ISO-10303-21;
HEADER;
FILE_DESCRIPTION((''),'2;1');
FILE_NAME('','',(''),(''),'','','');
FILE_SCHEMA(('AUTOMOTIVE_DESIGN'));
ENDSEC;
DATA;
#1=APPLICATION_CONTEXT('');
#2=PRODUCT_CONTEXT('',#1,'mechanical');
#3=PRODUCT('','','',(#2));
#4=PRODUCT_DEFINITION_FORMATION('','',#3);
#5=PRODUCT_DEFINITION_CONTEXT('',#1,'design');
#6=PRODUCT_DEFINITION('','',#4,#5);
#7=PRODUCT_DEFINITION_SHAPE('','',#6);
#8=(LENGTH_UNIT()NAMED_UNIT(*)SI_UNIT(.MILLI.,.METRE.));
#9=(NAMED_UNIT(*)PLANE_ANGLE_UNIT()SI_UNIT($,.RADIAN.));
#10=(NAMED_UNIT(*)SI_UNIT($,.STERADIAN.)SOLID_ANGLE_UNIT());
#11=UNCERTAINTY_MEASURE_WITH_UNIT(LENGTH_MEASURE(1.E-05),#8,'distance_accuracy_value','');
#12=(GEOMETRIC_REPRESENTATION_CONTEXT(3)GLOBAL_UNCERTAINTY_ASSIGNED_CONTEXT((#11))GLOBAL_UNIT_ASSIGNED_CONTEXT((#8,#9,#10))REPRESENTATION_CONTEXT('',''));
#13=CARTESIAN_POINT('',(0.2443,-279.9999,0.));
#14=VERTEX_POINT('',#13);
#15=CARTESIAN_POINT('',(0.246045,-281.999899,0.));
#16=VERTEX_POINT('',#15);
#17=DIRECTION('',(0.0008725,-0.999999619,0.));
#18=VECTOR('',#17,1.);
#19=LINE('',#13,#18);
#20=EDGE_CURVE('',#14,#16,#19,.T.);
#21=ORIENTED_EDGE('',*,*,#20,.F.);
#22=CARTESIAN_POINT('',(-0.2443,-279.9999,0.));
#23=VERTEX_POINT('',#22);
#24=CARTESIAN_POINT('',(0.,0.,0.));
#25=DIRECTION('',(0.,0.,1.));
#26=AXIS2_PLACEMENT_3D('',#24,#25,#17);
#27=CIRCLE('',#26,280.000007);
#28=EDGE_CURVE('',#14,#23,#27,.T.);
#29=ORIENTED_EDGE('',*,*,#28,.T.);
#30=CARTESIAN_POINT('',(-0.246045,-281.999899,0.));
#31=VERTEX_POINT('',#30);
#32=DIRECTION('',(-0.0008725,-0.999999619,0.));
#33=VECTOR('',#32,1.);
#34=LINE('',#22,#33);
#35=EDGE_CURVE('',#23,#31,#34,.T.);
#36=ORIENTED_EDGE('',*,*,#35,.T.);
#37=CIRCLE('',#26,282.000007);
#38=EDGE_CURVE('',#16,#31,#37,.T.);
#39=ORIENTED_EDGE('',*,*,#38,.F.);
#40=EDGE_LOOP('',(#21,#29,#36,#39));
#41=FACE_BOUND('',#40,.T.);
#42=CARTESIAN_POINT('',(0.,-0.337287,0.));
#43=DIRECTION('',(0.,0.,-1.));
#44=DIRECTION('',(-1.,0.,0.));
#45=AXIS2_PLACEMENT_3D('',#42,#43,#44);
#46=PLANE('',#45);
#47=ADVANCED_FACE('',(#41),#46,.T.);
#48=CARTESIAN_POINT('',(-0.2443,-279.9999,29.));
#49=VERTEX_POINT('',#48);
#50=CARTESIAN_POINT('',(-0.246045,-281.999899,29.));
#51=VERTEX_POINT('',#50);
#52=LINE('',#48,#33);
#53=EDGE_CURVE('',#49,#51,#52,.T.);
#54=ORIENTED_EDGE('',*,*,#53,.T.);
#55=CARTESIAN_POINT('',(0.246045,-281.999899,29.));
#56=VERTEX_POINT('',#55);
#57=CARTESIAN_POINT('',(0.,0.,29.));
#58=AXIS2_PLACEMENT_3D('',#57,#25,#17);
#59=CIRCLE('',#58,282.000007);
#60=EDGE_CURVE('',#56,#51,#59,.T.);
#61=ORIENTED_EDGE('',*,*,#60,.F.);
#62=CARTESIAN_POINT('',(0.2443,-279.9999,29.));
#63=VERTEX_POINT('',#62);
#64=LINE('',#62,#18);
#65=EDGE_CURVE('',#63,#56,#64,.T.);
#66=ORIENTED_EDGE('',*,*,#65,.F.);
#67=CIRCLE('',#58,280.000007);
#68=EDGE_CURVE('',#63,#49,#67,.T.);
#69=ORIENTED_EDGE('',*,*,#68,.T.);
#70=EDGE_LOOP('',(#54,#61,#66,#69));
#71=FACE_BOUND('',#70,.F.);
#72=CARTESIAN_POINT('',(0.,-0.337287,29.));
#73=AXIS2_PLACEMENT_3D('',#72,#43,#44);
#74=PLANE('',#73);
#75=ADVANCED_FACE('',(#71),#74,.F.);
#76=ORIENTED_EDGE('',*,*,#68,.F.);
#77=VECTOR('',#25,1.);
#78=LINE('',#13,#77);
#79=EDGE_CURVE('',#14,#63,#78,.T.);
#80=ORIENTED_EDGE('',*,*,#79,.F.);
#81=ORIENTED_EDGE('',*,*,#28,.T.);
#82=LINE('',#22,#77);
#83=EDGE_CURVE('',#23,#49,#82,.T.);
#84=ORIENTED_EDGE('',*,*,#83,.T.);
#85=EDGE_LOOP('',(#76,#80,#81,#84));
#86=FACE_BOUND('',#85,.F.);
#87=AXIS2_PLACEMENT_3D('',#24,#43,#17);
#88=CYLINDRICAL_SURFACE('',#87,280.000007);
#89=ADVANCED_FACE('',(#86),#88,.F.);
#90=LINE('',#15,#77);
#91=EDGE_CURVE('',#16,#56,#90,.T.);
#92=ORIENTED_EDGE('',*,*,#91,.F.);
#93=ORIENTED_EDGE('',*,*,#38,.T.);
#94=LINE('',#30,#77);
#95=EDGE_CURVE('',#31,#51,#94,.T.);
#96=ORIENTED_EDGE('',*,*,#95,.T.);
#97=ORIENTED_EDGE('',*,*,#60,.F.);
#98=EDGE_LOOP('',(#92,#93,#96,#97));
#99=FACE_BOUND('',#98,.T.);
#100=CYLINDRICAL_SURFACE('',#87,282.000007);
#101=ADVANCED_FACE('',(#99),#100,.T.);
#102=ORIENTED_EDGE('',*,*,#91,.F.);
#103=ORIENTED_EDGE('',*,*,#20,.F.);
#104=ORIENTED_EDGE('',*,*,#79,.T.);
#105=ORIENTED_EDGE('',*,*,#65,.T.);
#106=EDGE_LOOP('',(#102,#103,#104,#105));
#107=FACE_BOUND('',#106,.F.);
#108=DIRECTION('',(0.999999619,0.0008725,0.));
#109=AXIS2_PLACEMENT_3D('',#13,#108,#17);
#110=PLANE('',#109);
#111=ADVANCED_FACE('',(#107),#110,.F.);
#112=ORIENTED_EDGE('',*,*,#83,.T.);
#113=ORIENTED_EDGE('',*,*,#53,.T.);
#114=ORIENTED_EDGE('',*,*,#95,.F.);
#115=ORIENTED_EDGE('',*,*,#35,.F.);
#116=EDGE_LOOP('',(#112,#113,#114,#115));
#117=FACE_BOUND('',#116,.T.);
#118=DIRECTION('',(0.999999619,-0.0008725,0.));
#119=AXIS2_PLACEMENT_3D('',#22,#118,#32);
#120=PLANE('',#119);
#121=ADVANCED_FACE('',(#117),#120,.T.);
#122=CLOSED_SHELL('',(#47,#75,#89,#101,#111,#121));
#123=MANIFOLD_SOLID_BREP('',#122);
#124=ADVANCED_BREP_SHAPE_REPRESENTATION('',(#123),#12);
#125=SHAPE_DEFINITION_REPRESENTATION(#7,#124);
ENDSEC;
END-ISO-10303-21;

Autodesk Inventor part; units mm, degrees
ref_plane "YZ Plane" through (0, 0, 0) normal (1, 0, 0) x (0, 1, 0)
ref_plane "XZ Plane" through (0, 0, 0) normal (0, 1, 0) x (-1, 0, 0)
ref_plane "XY Plane" through (0, 0, 0) normal (0, 0, 1) x (1, 0, 0)
sketch "Sketch1" plane through (0, 0, 0) normal (0, 0, 1) x (1, 0, 0)
  arc A0 (0.2443, -279.9999) -> (-0.2443, -279.9999) centre (0, 0) ccw
  line L0 (0, 0) -> (-0.2443, -279.9999) construction
  line L1 (0, 0) -> (0, 241.44) construction
  line L2 (0, 0) -> (0.2443, -279.9999) construction
  arc A1 (-0.2443, -279.9999) -> (0.2443, -279.9999) centre (0, 0) ccw construction
  point P0 (-207.8461, 120)
  point P1 (207.8461, 120)
  dimension "d28" = 560
  dimension "d30" = 359.9
contour flange "Contour Flange1" sketch "Sketch1" thickness 2 bend radius 2 width 29 along (0, 0, 1) mid plane no both sides no wall seen from (0, 280, 0) lies toward (0, 1, 0) curves A0
bend "Bend1"
corner "Corner1"
equation "\"d28\" = Колесо_диам3_борт_ступицы"
equation "\"d31\" = Thickness"
equation "\"d32\" = BendReliefWidth"
equation "\"d33\" = BendReliefDepth"
equation "\"d34\" = MinimumRemnant"
equation "\"d35\" = TransitionRadius"
equation "\"d37\" = BendRadius"
equation "\"d39\" = CornerReliefSize"
equation "\"d40\" = GapSize"
equation "\"d41\" = JacobiRadiusSize"
equation "\"BendRadius\" = Thickness"
equation "\"BendReliefWidth\" = Thickness"
equation "\"BendReliefDepth\" = 0.5 * Thickness"
equation "\"CornerReliefSize\" = 4 * Thickness"
equation "\"MinimumRemnant\" = 2 * Thickness"
equation "\"TransitionRadius\" = BendRadius"
equation "\"JacobiRadiusSize\" = BendRadius"
equation "\"GapSize\" = Thickness"
equation "\"Колесо_диам3_борт_ступицы\" = 560"
equation "\"Thickness\" = 2"
properties part number "DMF 2.1 01 46 Gear axis wheel 6"
